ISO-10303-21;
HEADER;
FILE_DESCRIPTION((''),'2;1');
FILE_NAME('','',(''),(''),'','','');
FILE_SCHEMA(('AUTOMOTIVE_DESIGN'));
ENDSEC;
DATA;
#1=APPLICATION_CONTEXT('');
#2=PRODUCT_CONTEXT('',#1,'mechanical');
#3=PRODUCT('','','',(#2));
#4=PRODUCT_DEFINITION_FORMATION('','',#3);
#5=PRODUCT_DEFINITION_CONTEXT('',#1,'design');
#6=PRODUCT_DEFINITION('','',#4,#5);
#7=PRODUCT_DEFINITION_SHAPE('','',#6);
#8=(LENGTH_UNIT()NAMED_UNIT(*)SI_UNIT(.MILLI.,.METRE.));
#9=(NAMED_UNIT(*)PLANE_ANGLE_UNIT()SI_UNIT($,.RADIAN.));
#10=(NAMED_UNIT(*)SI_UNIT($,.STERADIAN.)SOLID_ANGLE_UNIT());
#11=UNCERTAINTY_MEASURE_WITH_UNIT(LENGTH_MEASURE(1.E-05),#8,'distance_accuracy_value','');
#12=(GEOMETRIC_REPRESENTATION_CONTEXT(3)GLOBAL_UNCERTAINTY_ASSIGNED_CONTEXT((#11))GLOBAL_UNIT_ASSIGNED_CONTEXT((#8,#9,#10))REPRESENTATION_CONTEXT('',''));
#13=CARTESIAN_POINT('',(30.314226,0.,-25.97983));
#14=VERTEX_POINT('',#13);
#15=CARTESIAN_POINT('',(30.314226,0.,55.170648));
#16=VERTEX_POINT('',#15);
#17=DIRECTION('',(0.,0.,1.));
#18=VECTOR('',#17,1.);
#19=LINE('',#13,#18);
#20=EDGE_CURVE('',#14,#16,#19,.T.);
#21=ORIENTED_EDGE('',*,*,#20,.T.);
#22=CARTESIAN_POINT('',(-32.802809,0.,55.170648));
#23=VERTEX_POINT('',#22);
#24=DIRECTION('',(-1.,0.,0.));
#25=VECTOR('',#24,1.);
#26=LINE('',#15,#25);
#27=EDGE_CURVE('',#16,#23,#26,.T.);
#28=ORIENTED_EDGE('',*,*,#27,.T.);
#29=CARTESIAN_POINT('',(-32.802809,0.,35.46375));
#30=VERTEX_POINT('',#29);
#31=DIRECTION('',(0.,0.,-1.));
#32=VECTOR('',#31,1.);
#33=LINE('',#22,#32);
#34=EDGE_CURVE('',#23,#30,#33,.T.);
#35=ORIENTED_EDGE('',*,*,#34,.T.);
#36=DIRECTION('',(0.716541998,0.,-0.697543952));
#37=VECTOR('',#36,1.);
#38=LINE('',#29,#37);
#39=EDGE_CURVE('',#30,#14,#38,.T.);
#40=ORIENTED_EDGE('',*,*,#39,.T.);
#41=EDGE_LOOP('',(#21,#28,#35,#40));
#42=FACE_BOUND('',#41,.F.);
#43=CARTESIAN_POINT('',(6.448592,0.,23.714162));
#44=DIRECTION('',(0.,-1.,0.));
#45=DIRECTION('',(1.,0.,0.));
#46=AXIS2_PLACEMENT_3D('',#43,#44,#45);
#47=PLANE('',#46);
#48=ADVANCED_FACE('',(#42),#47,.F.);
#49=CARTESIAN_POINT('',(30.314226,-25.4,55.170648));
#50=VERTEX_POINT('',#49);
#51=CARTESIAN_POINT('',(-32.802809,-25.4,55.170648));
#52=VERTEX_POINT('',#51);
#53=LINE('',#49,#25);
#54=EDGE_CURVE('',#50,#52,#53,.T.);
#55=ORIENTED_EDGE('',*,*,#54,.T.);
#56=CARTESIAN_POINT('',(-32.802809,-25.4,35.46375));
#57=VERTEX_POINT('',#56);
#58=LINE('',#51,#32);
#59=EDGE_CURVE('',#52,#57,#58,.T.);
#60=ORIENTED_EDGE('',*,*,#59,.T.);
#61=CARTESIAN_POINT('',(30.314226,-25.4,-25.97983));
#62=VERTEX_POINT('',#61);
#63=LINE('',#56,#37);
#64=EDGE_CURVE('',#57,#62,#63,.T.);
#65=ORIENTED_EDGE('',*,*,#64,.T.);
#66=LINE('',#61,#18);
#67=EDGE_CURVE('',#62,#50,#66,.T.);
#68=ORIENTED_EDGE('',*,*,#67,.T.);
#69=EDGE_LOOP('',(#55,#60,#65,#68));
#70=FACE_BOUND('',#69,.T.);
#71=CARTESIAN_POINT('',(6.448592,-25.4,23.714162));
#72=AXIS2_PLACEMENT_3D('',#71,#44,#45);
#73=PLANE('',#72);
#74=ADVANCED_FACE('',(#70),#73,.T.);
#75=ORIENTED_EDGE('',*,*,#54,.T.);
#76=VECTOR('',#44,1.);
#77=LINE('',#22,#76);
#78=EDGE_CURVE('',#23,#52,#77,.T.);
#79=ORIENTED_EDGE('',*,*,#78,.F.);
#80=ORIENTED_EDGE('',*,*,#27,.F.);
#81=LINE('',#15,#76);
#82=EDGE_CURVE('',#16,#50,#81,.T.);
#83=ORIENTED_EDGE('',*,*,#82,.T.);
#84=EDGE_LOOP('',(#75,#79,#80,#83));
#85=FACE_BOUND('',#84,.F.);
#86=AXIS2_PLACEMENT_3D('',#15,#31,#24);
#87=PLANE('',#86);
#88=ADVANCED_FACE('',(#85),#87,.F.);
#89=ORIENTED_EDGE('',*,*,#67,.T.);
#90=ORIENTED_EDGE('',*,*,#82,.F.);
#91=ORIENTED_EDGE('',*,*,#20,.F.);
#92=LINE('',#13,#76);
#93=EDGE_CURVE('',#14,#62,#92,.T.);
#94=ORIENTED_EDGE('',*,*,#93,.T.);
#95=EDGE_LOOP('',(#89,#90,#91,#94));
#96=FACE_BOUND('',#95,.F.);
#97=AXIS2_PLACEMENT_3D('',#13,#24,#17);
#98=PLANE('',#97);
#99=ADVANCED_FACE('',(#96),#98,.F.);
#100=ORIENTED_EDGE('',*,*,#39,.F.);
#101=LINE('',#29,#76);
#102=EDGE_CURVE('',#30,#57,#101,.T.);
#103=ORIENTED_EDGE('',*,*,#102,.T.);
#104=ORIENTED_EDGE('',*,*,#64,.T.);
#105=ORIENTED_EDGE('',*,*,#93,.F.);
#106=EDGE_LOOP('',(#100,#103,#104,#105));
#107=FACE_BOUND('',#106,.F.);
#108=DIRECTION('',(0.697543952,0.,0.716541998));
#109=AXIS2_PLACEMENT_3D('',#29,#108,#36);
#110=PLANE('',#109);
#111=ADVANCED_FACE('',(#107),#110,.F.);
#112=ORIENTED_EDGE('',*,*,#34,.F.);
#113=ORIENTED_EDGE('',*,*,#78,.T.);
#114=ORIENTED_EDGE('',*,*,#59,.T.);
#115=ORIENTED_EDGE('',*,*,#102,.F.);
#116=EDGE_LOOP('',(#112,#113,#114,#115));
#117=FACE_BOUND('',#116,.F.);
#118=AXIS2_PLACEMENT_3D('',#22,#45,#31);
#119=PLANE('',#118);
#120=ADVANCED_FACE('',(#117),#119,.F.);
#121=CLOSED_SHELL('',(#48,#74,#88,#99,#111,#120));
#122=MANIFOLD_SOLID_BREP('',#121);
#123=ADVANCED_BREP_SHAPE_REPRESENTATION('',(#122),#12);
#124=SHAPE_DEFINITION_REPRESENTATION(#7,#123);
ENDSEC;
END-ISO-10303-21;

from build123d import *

# Parameters (mm, degrees)
F1_DEPTH = 25.4


# Not quite as in the source:
# - a feature of the source that left no trace in its solid (it failed there, or was rolled back) is left out


with BuildPart() as f1:
    # F0 (on Front) → F1 (new body)
    with BuildSketch(Plane.XZ):
        Polygon((-32.8028090298, 55.1706478), (-32.8028090298, 35.4637503624), (30.3142257035, -25.9798299521), (30.3142257035, 55.1706478), align=None)
    extrude(amount=F1_DEPTH)


solid = f1.part
